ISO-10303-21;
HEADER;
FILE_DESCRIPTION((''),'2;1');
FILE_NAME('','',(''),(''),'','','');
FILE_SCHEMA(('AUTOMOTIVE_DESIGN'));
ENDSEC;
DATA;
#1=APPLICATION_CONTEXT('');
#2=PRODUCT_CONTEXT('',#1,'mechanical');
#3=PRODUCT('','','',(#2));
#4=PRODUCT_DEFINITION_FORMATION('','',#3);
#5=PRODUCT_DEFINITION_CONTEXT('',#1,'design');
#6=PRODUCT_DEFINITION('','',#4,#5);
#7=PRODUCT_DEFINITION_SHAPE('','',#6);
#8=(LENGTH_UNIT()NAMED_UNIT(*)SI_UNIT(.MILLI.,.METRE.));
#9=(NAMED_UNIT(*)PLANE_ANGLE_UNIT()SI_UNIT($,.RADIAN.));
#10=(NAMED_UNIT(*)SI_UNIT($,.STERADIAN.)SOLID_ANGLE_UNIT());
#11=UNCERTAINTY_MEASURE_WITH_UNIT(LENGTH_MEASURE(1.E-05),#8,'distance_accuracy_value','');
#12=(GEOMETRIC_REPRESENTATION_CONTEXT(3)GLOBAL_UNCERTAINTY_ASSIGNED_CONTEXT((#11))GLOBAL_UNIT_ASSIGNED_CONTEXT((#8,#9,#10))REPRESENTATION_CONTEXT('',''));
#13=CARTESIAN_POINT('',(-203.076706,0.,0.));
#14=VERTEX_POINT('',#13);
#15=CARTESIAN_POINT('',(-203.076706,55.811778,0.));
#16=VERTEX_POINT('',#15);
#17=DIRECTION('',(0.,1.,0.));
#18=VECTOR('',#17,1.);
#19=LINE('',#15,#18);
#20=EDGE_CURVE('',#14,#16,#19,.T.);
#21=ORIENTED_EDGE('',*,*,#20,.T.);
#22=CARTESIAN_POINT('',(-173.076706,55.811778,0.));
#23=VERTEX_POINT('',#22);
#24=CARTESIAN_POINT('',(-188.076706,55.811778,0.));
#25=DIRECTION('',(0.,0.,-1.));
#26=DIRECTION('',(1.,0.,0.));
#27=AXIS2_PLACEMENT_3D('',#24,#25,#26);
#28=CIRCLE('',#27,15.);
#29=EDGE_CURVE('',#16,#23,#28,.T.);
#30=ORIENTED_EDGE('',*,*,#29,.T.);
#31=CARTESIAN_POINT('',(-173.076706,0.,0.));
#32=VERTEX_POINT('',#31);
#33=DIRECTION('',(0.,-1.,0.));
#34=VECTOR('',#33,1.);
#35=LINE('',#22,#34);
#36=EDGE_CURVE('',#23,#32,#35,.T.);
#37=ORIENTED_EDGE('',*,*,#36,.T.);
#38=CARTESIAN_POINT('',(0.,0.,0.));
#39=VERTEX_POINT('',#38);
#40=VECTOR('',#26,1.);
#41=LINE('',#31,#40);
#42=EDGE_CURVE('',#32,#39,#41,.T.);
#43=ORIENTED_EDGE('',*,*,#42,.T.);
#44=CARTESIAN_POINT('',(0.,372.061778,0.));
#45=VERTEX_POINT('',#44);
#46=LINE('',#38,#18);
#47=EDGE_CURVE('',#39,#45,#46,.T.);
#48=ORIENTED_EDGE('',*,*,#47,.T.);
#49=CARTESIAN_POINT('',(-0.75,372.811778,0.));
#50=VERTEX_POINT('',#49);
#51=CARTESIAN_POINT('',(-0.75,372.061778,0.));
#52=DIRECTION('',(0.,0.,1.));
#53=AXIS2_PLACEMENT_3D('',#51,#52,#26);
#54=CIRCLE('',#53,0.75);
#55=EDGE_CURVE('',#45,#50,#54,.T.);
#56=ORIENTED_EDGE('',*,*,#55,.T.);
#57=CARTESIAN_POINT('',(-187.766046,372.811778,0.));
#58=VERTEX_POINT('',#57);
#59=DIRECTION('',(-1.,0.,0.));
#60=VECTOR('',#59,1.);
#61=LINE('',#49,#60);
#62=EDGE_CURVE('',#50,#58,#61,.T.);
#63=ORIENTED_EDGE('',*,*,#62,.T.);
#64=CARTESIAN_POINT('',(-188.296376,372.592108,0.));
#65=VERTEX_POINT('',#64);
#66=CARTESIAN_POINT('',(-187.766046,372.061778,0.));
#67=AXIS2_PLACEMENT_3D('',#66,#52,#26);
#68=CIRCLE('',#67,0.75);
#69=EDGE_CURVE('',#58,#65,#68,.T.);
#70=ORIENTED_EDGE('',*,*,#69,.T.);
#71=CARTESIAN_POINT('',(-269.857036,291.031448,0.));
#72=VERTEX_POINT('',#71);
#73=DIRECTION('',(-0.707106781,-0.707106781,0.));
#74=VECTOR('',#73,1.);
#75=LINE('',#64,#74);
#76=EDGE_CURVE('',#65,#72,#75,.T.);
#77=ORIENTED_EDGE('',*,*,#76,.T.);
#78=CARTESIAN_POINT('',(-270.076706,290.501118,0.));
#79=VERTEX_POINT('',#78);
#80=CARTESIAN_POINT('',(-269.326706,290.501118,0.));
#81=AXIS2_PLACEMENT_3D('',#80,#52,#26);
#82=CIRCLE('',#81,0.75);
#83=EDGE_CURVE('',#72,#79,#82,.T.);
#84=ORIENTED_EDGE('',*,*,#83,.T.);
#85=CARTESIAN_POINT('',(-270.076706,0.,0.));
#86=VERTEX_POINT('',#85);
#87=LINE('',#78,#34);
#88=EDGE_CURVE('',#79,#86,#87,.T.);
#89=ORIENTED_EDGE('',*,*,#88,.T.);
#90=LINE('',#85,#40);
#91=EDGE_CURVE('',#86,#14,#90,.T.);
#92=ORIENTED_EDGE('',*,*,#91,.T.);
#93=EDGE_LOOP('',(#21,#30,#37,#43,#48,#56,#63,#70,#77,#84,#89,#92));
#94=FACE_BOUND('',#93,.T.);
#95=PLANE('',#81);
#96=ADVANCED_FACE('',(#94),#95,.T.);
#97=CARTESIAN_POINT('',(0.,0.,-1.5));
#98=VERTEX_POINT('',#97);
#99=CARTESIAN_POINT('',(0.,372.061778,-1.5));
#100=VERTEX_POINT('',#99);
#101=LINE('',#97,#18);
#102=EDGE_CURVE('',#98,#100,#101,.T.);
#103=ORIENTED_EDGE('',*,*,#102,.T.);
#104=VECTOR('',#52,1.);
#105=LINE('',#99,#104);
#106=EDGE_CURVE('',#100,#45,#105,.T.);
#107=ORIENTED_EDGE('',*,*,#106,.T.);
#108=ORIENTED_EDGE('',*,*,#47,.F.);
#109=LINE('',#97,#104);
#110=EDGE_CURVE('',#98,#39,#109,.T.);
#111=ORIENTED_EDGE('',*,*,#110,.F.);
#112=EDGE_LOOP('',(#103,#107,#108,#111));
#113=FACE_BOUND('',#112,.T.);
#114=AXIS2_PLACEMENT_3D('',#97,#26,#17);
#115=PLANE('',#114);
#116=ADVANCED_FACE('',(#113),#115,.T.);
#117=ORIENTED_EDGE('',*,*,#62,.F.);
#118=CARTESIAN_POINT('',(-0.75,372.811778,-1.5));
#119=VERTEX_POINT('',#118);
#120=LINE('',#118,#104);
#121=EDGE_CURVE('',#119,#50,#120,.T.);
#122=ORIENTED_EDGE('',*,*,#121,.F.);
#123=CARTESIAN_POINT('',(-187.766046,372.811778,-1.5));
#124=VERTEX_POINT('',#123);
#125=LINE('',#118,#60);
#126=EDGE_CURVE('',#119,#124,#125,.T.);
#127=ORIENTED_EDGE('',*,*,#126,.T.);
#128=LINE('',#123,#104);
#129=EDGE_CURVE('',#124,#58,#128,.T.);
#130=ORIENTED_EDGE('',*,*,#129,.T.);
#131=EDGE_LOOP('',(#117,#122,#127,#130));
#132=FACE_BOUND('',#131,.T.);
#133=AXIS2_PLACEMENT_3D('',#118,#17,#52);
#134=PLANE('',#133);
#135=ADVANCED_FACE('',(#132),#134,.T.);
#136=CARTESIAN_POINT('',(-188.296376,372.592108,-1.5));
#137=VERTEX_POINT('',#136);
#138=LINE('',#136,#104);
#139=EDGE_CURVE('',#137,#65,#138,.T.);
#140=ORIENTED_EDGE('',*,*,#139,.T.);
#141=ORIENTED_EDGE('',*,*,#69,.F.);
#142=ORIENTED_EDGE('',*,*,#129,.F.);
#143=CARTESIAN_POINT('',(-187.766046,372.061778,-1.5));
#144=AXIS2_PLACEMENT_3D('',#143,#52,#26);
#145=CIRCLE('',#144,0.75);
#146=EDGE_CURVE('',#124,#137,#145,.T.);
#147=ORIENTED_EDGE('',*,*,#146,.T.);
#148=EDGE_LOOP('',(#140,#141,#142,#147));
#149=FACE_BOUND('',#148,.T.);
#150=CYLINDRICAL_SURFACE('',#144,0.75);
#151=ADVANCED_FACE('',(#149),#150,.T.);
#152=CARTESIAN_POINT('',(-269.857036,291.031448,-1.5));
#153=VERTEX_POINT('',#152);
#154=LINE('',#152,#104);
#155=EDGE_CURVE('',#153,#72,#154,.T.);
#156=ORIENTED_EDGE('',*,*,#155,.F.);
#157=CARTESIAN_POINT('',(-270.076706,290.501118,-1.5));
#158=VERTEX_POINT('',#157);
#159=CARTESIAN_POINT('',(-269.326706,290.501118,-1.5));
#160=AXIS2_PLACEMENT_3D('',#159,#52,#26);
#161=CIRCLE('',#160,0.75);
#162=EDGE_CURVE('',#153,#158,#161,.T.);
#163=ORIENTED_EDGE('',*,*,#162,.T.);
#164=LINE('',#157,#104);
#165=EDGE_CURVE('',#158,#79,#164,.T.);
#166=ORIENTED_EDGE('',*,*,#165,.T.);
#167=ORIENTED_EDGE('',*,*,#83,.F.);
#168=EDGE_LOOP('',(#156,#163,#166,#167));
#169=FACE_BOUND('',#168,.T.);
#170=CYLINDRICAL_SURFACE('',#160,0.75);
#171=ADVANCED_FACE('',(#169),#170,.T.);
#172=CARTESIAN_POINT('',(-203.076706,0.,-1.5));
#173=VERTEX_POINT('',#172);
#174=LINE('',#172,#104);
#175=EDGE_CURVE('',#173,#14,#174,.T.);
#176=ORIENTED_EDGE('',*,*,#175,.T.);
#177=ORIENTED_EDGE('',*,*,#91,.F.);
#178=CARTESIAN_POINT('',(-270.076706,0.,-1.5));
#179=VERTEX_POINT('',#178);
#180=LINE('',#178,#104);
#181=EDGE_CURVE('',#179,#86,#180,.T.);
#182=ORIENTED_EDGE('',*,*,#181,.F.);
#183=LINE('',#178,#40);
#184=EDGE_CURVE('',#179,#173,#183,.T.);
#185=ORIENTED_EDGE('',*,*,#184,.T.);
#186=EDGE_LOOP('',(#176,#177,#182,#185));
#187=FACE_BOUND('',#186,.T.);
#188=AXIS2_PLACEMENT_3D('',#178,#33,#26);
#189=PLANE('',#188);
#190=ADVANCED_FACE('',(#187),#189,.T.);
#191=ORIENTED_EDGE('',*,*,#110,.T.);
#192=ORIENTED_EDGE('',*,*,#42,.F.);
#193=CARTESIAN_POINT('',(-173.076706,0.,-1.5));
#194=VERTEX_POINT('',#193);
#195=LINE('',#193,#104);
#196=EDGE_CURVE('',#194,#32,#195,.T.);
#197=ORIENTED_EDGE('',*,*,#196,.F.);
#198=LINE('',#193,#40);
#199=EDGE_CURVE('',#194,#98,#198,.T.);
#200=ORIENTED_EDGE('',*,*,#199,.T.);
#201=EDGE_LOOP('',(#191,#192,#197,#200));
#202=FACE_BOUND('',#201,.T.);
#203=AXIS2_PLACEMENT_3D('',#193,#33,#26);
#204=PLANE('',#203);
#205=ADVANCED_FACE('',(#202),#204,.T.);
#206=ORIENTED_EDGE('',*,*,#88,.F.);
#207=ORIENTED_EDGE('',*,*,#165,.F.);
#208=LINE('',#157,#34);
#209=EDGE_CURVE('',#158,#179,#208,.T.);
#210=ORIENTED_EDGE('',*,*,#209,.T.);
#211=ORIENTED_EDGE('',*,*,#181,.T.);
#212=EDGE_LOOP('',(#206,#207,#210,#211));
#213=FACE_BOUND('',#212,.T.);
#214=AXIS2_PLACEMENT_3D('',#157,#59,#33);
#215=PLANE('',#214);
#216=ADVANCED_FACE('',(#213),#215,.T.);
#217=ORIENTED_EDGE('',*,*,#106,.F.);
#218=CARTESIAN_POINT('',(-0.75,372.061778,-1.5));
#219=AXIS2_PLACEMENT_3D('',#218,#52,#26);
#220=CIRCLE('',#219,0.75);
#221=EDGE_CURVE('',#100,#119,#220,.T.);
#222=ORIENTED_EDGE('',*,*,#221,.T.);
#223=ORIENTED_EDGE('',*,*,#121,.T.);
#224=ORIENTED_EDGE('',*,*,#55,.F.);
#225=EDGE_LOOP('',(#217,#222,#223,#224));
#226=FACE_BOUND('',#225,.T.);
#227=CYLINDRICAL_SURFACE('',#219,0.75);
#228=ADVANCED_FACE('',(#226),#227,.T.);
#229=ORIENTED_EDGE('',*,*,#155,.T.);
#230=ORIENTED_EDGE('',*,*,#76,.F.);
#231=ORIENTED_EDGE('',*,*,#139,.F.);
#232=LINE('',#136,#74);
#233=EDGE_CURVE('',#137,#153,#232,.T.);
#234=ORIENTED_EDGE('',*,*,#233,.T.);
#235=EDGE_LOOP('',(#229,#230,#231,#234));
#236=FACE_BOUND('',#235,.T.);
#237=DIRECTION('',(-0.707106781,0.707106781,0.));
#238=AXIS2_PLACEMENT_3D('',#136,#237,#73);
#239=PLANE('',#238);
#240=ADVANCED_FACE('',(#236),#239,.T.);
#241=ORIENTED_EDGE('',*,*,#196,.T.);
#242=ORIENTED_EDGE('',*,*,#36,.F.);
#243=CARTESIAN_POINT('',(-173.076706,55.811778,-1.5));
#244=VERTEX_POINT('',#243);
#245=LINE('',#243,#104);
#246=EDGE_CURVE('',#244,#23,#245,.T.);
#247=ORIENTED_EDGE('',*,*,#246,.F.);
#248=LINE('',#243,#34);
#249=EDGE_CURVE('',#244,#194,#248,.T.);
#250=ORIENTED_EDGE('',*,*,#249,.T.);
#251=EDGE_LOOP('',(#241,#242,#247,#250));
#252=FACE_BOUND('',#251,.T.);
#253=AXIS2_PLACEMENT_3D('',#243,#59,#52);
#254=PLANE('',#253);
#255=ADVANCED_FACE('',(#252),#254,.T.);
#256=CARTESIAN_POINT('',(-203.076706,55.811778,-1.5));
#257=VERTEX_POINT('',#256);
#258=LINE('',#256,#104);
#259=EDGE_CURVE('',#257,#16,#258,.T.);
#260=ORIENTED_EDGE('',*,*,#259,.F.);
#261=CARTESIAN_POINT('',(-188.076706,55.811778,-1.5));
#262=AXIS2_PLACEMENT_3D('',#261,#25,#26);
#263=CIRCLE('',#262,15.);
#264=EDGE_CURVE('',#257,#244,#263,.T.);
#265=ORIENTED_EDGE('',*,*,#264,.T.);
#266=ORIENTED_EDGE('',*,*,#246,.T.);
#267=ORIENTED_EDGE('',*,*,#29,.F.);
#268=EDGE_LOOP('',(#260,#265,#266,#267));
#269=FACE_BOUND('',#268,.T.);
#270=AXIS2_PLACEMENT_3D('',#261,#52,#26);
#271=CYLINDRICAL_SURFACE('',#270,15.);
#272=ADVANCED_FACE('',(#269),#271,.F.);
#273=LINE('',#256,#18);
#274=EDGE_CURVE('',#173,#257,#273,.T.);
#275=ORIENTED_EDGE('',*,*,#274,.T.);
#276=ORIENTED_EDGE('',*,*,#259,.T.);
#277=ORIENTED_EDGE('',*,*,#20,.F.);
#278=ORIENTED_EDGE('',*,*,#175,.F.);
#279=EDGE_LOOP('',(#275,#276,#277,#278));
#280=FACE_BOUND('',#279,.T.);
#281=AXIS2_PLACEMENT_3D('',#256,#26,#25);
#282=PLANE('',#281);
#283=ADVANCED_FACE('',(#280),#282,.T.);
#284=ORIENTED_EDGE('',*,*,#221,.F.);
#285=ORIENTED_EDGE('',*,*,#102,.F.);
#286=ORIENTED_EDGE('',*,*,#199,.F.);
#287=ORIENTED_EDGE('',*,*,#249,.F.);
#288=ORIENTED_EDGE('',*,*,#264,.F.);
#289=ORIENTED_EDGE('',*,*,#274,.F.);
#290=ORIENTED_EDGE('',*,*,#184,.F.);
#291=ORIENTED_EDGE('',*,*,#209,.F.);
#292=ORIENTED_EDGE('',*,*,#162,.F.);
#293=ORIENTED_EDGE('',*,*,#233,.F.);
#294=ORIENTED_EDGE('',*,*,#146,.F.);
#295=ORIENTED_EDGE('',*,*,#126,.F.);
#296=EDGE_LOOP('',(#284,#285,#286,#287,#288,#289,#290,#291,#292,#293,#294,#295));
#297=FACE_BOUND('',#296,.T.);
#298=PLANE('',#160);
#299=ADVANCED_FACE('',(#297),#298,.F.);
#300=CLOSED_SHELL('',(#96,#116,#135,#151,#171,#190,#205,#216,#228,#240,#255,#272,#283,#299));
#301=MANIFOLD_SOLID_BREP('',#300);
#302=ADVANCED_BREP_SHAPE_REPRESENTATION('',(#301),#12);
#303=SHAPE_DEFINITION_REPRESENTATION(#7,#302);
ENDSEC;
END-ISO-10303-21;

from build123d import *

# Parameters (mm, degrees)
SM_BASE_FLANGE_1_DEPTH = 1.5


# Sheet-metal steps are written as plain solids
with BuildPart() as part:
    # Sketch 1 → Базовая кромка1 (new body)
    with BuildSketch(Plane.XY):
        with BuildLine():
            Line((-270.076706029, 290.501117881), (-270.076706029, 0))
            Line((-270.076706029, 0), (-203.076706029, 0))
            Line((-203.076706029, 0), (-203.076706029, 55.811778053))
            ThreePointArc((-203.076706029, 55.811778053), (-188.076706029, 70.811778053), (-173.076706029, 55.811778053))
            Line((-173.076706029, 55.811778053), (-173.076706029, 0))
            Line((-173.076706029, 0), (0, 0))
            Line((0, 0), (0, 372.061778053))
            ThreePointArc((0, 372.061778053), (-0.219669914, 372.592108139), (-0.75, 372.811778053))
            Line((-0.75, 372.811778053), (-187.766045857, 372.811778053))
            ThreePointArc((-187.766045857, 372.811778053), (-188.053058432, 372.754687702), (-188.296375943, 372.592108139))
            Line((-188.296375943, 372.592108139), (-269.857036115, 291.031447967))
            ThreePointArc((-269.857036115, 291.031447967), (-270.019615678, 290.788130455), (-270.076706029, 290.501117881))
        make_face()
    extrude(amount=-SM_BASE_FLANGE_1_DEPTH)


solid = part.part
